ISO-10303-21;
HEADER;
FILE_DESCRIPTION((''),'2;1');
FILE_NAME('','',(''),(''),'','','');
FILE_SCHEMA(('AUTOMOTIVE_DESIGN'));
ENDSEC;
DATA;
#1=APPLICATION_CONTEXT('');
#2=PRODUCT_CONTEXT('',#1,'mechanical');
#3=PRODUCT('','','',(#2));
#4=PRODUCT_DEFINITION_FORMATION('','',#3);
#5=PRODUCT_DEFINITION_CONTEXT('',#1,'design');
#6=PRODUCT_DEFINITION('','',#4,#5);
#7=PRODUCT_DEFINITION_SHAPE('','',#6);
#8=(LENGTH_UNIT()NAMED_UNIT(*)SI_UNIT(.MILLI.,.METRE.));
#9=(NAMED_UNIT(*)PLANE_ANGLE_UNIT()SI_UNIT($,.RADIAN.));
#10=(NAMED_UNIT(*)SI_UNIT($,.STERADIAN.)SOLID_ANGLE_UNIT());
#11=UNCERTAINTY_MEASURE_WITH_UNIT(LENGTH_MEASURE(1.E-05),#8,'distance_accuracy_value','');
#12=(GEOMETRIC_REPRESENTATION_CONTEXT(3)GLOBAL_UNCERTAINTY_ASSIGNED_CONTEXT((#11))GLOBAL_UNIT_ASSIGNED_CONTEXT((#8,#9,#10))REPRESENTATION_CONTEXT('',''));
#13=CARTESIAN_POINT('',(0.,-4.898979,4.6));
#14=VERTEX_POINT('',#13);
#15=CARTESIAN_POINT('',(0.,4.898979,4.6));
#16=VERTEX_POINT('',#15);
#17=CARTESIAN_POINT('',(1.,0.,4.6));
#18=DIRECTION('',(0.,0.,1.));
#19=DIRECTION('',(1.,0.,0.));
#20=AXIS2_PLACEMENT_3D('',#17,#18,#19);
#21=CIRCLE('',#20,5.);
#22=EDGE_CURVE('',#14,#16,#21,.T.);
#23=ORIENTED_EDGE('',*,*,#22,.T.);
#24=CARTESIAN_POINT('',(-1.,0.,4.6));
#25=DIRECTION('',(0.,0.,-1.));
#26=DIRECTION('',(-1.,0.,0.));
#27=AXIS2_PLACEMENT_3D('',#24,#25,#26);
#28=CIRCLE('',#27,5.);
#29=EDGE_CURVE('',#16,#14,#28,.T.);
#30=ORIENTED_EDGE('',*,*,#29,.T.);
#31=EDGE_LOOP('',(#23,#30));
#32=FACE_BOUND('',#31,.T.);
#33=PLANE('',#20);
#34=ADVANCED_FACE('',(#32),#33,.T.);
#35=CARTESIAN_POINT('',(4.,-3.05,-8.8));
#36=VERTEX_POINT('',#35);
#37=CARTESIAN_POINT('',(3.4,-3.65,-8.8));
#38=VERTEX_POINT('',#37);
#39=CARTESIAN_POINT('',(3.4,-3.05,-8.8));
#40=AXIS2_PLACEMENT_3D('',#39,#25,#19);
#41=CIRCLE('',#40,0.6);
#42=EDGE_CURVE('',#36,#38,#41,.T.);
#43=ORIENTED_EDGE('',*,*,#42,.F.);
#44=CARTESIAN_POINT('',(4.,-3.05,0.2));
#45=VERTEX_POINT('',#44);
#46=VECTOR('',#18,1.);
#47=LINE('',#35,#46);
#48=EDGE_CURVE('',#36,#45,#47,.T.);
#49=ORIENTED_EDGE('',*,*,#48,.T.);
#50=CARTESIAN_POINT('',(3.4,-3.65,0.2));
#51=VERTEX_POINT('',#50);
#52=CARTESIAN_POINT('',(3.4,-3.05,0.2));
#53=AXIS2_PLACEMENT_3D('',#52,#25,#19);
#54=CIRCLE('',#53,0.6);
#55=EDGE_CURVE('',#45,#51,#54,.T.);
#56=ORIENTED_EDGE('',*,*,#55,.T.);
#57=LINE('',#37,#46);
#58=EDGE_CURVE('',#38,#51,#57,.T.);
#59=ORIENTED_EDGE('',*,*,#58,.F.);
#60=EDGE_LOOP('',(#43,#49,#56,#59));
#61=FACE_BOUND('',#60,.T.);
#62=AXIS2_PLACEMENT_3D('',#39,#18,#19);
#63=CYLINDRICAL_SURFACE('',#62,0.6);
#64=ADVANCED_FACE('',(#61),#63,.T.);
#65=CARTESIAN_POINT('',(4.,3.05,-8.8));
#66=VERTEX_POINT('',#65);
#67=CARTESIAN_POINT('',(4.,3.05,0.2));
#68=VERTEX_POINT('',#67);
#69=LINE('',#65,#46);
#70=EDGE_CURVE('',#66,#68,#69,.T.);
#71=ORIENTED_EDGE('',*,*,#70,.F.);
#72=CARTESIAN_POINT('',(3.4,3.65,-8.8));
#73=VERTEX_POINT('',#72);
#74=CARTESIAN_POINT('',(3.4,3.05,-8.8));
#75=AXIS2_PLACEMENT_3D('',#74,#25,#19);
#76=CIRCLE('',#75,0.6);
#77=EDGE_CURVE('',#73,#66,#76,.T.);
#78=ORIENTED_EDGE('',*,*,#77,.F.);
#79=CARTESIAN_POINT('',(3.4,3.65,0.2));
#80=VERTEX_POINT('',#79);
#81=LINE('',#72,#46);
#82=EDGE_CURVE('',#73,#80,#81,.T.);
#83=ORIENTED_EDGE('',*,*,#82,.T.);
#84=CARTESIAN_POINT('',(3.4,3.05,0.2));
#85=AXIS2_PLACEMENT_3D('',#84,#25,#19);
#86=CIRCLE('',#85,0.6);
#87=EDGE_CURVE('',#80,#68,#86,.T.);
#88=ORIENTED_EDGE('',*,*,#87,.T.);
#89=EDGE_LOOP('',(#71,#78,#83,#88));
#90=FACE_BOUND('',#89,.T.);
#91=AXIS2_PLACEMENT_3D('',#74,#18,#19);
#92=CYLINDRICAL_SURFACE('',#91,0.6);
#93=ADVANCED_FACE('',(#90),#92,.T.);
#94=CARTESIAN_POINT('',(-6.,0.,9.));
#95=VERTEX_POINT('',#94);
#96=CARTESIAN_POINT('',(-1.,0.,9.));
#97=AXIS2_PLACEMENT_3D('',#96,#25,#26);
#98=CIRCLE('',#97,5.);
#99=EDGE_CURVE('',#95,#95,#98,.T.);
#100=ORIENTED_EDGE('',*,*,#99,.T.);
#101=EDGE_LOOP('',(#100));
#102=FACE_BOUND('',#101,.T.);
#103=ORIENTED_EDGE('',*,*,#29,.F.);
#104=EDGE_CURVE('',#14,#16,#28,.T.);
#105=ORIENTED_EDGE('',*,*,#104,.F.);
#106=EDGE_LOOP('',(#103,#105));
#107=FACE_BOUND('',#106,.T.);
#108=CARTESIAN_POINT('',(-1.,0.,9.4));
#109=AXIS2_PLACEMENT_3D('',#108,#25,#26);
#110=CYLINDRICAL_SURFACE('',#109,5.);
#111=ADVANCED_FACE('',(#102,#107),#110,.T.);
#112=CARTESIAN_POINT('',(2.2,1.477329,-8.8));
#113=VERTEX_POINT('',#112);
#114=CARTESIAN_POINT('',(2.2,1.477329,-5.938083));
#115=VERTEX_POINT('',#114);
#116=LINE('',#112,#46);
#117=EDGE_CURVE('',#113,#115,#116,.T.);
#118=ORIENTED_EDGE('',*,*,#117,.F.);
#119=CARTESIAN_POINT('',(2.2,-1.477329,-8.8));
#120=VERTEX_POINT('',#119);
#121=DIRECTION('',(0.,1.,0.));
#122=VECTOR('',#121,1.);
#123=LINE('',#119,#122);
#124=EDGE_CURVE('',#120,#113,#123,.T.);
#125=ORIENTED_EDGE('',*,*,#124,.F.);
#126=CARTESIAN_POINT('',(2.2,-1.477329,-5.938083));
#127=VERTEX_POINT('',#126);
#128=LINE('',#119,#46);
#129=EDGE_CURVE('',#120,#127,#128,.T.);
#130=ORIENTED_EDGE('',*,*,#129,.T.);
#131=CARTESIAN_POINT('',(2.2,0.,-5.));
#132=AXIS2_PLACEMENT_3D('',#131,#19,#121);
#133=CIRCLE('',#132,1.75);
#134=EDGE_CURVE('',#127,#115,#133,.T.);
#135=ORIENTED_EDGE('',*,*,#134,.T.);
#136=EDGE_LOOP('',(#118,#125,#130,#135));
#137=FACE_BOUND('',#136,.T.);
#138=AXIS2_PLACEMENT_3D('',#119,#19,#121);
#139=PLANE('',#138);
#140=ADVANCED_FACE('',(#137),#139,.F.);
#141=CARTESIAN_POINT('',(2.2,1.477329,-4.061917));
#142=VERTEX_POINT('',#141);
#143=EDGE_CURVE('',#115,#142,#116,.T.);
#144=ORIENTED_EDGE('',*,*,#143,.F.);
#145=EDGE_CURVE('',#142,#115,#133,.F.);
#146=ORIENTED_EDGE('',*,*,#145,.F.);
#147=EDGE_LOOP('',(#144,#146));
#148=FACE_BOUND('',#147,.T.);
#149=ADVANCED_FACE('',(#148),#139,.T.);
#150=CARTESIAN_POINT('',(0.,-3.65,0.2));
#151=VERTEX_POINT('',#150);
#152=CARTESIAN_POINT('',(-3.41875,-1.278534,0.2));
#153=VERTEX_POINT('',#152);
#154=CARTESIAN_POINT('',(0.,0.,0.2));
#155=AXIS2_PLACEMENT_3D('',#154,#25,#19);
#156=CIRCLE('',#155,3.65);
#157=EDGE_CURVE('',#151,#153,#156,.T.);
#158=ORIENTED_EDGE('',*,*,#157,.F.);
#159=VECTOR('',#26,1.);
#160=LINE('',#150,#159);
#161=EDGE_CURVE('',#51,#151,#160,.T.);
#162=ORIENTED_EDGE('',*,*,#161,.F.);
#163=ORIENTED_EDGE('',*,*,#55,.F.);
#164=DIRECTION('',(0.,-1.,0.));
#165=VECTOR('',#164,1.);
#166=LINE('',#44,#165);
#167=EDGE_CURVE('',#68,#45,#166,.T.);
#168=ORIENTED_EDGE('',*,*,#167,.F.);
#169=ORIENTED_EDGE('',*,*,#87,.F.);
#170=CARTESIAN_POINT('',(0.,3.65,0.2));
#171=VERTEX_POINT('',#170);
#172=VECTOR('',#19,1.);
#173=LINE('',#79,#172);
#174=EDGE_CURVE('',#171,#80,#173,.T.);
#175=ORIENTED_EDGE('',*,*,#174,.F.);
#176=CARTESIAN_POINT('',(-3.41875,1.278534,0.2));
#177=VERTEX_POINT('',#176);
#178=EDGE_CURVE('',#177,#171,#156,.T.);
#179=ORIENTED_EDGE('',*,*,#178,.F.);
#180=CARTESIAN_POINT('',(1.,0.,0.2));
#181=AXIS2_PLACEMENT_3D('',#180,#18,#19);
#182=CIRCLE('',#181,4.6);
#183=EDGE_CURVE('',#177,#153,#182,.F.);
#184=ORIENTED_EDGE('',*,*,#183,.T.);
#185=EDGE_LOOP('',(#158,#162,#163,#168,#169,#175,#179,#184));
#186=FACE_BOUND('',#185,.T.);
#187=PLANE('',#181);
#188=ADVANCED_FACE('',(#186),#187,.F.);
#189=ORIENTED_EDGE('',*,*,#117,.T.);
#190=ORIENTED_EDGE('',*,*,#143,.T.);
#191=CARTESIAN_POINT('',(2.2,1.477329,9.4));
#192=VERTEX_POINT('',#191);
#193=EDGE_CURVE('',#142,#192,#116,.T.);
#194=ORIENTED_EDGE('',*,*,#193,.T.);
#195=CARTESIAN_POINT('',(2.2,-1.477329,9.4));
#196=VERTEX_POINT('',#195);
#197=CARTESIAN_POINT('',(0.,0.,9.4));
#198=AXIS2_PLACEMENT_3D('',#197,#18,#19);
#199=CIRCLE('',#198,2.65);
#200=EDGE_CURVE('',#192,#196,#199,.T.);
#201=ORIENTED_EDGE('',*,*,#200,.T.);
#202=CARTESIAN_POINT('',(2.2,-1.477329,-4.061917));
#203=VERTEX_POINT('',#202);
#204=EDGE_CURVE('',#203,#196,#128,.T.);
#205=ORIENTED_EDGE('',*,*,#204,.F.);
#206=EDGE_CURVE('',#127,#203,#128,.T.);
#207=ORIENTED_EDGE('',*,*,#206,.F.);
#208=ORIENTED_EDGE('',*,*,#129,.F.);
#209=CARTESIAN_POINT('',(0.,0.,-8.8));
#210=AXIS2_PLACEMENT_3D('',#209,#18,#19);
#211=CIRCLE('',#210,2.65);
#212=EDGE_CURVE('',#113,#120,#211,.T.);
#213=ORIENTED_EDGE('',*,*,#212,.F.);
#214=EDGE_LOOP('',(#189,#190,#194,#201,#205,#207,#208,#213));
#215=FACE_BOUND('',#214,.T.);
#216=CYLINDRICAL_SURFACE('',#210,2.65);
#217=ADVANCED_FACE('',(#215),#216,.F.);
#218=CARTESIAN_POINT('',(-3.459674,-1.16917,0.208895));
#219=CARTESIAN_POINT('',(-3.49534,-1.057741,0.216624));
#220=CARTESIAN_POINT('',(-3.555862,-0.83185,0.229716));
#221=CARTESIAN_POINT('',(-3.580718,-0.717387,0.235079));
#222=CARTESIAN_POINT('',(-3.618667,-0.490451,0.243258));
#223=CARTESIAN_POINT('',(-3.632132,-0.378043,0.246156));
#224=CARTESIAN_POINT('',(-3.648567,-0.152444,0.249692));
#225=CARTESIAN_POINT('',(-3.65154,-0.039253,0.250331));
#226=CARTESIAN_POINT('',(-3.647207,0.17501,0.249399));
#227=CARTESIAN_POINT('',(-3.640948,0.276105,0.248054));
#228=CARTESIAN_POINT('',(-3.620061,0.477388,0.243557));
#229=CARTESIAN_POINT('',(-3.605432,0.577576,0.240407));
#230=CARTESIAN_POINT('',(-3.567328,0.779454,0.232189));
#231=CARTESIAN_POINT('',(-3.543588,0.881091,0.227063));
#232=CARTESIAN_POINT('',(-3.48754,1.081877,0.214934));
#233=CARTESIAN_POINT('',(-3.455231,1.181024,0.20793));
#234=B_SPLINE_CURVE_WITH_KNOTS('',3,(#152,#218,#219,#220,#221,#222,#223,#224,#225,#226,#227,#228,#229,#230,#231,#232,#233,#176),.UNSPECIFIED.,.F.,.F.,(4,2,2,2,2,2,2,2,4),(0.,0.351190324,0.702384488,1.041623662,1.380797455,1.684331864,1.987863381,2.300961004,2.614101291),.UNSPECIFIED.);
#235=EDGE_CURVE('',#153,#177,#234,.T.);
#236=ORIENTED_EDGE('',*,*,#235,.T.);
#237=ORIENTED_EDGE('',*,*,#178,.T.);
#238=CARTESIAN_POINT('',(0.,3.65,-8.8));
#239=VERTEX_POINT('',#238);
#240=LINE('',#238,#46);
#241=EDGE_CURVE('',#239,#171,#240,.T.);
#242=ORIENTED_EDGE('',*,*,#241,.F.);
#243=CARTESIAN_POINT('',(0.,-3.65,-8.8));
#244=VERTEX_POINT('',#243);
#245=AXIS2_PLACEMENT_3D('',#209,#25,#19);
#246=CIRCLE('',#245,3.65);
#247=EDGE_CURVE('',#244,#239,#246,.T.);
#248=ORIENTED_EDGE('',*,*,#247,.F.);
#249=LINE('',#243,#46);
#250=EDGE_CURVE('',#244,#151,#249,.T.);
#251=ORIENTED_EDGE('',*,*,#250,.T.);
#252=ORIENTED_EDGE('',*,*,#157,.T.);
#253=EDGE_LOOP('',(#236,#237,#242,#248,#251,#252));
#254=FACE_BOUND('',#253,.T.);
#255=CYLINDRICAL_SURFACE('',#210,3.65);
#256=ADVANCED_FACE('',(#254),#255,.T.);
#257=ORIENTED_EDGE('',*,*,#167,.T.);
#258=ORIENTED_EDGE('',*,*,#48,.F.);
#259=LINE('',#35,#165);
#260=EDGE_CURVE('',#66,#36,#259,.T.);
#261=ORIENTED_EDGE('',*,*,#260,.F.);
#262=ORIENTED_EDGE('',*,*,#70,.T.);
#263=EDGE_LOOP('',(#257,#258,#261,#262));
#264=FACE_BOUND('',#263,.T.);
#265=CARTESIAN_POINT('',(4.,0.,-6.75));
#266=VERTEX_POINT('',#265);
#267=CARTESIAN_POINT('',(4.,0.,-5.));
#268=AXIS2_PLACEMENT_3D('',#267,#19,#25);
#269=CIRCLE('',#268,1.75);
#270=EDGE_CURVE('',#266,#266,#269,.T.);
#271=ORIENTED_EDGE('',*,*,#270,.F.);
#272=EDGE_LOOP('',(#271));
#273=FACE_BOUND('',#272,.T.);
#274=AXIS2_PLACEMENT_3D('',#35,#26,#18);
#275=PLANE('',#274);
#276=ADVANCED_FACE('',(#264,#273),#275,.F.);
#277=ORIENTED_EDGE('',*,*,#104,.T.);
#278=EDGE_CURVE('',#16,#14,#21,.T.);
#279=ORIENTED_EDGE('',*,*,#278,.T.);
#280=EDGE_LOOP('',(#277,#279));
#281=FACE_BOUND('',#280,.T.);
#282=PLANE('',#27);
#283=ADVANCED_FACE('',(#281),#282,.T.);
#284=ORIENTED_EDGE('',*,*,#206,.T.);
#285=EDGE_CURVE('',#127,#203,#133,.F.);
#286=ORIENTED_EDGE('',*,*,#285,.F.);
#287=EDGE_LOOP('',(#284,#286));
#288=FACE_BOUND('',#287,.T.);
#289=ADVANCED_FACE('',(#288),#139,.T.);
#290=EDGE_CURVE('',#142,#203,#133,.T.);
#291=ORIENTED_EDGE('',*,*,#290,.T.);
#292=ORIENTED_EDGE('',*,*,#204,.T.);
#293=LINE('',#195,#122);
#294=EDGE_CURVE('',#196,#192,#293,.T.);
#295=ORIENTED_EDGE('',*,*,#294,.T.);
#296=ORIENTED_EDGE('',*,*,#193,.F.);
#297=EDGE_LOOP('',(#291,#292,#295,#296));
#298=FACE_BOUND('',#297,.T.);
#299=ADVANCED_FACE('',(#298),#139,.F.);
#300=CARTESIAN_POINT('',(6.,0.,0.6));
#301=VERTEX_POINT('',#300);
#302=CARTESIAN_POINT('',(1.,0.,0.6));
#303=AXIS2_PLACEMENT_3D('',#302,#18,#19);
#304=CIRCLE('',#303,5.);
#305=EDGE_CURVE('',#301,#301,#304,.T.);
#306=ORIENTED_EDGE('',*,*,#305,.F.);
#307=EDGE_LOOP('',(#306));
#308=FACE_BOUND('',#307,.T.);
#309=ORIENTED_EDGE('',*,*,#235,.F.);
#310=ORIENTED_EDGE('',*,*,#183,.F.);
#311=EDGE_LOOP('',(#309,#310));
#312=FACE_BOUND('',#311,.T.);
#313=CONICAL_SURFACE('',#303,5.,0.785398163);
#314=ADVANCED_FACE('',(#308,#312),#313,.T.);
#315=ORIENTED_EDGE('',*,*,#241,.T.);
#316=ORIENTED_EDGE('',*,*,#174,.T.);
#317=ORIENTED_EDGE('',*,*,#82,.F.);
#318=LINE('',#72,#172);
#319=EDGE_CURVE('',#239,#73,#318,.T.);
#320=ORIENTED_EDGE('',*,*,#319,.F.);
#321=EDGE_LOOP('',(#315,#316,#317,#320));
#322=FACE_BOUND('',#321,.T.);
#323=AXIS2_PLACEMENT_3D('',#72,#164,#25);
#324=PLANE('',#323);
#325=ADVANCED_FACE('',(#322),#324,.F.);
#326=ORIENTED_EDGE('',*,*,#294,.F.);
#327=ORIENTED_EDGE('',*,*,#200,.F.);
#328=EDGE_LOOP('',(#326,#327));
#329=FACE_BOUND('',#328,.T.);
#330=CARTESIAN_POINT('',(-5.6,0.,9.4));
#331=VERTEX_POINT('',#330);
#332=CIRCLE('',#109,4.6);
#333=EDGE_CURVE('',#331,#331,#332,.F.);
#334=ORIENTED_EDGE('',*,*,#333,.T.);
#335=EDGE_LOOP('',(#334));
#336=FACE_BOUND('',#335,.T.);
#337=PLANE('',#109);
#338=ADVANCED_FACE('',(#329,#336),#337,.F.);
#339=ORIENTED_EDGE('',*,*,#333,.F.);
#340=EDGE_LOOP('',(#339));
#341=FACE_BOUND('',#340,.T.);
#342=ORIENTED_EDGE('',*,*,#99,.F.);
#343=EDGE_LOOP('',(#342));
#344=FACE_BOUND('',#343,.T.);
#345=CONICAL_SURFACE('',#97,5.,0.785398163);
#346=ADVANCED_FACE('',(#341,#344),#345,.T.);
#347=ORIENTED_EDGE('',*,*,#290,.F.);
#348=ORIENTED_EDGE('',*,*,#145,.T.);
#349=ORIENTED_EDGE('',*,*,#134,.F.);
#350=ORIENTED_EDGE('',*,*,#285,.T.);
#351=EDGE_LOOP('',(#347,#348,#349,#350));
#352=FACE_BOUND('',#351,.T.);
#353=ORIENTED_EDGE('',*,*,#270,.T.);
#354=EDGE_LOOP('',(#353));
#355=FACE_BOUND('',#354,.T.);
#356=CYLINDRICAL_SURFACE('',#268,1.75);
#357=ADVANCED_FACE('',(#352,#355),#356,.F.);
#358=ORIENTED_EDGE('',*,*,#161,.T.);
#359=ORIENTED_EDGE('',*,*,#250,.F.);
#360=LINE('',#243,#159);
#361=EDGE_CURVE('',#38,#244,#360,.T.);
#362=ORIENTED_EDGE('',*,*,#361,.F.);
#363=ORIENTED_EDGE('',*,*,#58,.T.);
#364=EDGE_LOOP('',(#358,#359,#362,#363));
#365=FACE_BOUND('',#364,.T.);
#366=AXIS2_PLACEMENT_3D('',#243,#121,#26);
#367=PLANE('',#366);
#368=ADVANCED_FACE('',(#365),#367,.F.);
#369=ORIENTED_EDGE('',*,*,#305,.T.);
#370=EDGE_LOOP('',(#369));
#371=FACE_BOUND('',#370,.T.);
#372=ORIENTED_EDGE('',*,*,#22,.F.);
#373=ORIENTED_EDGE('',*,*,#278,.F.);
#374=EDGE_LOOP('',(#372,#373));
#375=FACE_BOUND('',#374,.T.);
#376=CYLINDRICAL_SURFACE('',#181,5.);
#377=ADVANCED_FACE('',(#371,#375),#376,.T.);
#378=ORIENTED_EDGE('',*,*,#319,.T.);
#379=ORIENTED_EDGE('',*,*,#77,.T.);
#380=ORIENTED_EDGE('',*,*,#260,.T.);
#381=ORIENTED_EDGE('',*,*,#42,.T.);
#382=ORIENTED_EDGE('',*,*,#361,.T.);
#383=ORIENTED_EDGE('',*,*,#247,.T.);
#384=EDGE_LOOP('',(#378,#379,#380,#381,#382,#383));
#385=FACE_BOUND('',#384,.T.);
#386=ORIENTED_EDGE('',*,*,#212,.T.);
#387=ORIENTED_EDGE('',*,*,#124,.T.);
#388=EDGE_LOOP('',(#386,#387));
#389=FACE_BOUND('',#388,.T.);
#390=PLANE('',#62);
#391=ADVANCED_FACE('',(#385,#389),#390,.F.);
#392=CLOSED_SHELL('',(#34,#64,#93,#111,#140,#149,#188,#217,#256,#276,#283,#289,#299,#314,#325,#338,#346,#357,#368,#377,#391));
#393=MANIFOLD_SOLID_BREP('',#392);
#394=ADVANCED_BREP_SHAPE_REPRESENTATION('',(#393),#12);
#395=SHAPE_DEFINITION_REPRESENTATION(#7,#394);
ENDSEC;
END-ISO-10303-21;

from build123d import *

# Parameters (mm, degrees)
BOSS_EXTRUDE4_DEPTH      = 4.2
BOSS_EXTRUDE4_DEPTH_BACK = 0.2
SKETCH10_R               = 5
BOSS_EXTRUDE5_DEPTH      = 9
SKETCH16_R               = 5
BOSS_EXTRUDE6_DEPTH      = 4.8
CUT_EXTRUDE2_DEPTH       = 20.805049861
HOLEWZD2_D               = 3.5
HOLEWZD2_DEPTH           = 1.8
CHAMFER2_SIZE            = 0.4


with BuildPart() as part:
    # Sketch10 → Boss-Extrude4 (new, two sides: drawn at the far end of the back side and taken through both)
    with BuildSketch(Plane.XY.offset(0.4).offset(-BOSS_EXTRUDE4_DEPTH_BACK)):
        with Locations((1, 0)):
            Circle(SKETCH10_R)
    extrude(amount=BOSS_EXTRUDE4_DEPTH + BOSS_EXTRUDE4_DEPTH_BACK)

    # Sketch11 → Boss-Extrude5 (add)
    with BuildSketch(Plane(origin=(0, 0, 0.2), x_dir=(-1, 0, 0), z_dir=(0, 0, -1))):
        with BuildLine():
            Line((-4, -3.05), (-4, 3.05))
            ThreePointArc((-4, 3.05), (-3.824264069, 3.474264069), (-3.4, 3.65))
            Line((-3.4, 3.65), (0, 3.65))
            ThreePointArc((0, 3.65), (3.65, 0), (0, -3.65))
            Line((0, -3.65), (-3.4, -3.65))
            ThreePointArc((-3.4, -3.65), (-3.824264069, -3.474264069), (-4, -3.05))
        make_face()
    extrude(amount=BOSS_EXTRUDE5_DEPTH)

    # Sketch16 → Boss-Extrude6 (add)
    with BuildSketch(Plane(origin=(0, 0, 4.6), x_dir=(-1, 0, 0), z_dir=(0, 0, -1))):
        with Locations((1, 0)):
            Circle(SKETCH16_R)
    extrude(amount=-BOSS_EXTRUDE6_DEPTH)

    # Sketch17 → Cut-Extrude2 (cut, through all)
    with BuildSketch(Plane.XY.offset(9.4)):
        with BuildLine():
            Line((2.2, -1.47732867), (2.2, 1.47732867))
            ThreePointArc((2.2, 1.47732867), (-2.65, 0), (2.2, -1.47732867))
        make_face()
    extrude(amount=-CUT_EXTRUDE2_DEPTH, mode=Mode.SUBTRACT)

    # HoleWzd2
    with Locations(Plane(origin=(4, 0, 0), x_dir=(0, 0, -1), z_dir=(1, 0, 0))):
        with Locations((5, 0)):
            Hole(HOLEWZD2_D / 2, depth=HOLEWZD2_DEPTH)

    # Chamfer2
    # the kernel refuses this chamfer: 0.4 mm, written as the material it takes off along each edge
    with BuildSketch(Plane(origin=(-1, 0, 9.4), x_dir=(-1, 0, 0), z_dir=(0, -1, 0))) as chamfer2_piece_1:
        Polygon((5, CHAMFER2_SIZE), (5 - CHAMFER2_SIZE, 0), (5, 0), align=None)
    revolve(axis=Axis((-1, 0, 9.4), (0, 0, -1)), mode=Mode.SUBTRACT)
    with BuildSketch(Plane(origin=(1, 0, 0.2), x_dir=(1, 0, 0), z_dir=(0, -1, 0))) as chamfer2_piece_2_section:
        Polygon((5, CHAMFER2_SIZE), (5 - CHAMFER2_SIZE, 0), (5, 0), align=None)
    chamfer2_piece_2 = revolve(axis=Axis((1, 0, 0.2), (0, 0, 1)), mode=Mode.PRIVATE)
    chamfer2_piece_2 = chamfer2_piece_2 - Plane(origin=(0, 0, 0.390166904), x_dir=(0, 1, 0), z_dir=(0, 0, 1)) * Cylinder(3.65, 20, mode=Mode.PRIVATE)
    add(chamfer2_piece_2, mode=Mode.SUBTRACT)


solid = part.part
